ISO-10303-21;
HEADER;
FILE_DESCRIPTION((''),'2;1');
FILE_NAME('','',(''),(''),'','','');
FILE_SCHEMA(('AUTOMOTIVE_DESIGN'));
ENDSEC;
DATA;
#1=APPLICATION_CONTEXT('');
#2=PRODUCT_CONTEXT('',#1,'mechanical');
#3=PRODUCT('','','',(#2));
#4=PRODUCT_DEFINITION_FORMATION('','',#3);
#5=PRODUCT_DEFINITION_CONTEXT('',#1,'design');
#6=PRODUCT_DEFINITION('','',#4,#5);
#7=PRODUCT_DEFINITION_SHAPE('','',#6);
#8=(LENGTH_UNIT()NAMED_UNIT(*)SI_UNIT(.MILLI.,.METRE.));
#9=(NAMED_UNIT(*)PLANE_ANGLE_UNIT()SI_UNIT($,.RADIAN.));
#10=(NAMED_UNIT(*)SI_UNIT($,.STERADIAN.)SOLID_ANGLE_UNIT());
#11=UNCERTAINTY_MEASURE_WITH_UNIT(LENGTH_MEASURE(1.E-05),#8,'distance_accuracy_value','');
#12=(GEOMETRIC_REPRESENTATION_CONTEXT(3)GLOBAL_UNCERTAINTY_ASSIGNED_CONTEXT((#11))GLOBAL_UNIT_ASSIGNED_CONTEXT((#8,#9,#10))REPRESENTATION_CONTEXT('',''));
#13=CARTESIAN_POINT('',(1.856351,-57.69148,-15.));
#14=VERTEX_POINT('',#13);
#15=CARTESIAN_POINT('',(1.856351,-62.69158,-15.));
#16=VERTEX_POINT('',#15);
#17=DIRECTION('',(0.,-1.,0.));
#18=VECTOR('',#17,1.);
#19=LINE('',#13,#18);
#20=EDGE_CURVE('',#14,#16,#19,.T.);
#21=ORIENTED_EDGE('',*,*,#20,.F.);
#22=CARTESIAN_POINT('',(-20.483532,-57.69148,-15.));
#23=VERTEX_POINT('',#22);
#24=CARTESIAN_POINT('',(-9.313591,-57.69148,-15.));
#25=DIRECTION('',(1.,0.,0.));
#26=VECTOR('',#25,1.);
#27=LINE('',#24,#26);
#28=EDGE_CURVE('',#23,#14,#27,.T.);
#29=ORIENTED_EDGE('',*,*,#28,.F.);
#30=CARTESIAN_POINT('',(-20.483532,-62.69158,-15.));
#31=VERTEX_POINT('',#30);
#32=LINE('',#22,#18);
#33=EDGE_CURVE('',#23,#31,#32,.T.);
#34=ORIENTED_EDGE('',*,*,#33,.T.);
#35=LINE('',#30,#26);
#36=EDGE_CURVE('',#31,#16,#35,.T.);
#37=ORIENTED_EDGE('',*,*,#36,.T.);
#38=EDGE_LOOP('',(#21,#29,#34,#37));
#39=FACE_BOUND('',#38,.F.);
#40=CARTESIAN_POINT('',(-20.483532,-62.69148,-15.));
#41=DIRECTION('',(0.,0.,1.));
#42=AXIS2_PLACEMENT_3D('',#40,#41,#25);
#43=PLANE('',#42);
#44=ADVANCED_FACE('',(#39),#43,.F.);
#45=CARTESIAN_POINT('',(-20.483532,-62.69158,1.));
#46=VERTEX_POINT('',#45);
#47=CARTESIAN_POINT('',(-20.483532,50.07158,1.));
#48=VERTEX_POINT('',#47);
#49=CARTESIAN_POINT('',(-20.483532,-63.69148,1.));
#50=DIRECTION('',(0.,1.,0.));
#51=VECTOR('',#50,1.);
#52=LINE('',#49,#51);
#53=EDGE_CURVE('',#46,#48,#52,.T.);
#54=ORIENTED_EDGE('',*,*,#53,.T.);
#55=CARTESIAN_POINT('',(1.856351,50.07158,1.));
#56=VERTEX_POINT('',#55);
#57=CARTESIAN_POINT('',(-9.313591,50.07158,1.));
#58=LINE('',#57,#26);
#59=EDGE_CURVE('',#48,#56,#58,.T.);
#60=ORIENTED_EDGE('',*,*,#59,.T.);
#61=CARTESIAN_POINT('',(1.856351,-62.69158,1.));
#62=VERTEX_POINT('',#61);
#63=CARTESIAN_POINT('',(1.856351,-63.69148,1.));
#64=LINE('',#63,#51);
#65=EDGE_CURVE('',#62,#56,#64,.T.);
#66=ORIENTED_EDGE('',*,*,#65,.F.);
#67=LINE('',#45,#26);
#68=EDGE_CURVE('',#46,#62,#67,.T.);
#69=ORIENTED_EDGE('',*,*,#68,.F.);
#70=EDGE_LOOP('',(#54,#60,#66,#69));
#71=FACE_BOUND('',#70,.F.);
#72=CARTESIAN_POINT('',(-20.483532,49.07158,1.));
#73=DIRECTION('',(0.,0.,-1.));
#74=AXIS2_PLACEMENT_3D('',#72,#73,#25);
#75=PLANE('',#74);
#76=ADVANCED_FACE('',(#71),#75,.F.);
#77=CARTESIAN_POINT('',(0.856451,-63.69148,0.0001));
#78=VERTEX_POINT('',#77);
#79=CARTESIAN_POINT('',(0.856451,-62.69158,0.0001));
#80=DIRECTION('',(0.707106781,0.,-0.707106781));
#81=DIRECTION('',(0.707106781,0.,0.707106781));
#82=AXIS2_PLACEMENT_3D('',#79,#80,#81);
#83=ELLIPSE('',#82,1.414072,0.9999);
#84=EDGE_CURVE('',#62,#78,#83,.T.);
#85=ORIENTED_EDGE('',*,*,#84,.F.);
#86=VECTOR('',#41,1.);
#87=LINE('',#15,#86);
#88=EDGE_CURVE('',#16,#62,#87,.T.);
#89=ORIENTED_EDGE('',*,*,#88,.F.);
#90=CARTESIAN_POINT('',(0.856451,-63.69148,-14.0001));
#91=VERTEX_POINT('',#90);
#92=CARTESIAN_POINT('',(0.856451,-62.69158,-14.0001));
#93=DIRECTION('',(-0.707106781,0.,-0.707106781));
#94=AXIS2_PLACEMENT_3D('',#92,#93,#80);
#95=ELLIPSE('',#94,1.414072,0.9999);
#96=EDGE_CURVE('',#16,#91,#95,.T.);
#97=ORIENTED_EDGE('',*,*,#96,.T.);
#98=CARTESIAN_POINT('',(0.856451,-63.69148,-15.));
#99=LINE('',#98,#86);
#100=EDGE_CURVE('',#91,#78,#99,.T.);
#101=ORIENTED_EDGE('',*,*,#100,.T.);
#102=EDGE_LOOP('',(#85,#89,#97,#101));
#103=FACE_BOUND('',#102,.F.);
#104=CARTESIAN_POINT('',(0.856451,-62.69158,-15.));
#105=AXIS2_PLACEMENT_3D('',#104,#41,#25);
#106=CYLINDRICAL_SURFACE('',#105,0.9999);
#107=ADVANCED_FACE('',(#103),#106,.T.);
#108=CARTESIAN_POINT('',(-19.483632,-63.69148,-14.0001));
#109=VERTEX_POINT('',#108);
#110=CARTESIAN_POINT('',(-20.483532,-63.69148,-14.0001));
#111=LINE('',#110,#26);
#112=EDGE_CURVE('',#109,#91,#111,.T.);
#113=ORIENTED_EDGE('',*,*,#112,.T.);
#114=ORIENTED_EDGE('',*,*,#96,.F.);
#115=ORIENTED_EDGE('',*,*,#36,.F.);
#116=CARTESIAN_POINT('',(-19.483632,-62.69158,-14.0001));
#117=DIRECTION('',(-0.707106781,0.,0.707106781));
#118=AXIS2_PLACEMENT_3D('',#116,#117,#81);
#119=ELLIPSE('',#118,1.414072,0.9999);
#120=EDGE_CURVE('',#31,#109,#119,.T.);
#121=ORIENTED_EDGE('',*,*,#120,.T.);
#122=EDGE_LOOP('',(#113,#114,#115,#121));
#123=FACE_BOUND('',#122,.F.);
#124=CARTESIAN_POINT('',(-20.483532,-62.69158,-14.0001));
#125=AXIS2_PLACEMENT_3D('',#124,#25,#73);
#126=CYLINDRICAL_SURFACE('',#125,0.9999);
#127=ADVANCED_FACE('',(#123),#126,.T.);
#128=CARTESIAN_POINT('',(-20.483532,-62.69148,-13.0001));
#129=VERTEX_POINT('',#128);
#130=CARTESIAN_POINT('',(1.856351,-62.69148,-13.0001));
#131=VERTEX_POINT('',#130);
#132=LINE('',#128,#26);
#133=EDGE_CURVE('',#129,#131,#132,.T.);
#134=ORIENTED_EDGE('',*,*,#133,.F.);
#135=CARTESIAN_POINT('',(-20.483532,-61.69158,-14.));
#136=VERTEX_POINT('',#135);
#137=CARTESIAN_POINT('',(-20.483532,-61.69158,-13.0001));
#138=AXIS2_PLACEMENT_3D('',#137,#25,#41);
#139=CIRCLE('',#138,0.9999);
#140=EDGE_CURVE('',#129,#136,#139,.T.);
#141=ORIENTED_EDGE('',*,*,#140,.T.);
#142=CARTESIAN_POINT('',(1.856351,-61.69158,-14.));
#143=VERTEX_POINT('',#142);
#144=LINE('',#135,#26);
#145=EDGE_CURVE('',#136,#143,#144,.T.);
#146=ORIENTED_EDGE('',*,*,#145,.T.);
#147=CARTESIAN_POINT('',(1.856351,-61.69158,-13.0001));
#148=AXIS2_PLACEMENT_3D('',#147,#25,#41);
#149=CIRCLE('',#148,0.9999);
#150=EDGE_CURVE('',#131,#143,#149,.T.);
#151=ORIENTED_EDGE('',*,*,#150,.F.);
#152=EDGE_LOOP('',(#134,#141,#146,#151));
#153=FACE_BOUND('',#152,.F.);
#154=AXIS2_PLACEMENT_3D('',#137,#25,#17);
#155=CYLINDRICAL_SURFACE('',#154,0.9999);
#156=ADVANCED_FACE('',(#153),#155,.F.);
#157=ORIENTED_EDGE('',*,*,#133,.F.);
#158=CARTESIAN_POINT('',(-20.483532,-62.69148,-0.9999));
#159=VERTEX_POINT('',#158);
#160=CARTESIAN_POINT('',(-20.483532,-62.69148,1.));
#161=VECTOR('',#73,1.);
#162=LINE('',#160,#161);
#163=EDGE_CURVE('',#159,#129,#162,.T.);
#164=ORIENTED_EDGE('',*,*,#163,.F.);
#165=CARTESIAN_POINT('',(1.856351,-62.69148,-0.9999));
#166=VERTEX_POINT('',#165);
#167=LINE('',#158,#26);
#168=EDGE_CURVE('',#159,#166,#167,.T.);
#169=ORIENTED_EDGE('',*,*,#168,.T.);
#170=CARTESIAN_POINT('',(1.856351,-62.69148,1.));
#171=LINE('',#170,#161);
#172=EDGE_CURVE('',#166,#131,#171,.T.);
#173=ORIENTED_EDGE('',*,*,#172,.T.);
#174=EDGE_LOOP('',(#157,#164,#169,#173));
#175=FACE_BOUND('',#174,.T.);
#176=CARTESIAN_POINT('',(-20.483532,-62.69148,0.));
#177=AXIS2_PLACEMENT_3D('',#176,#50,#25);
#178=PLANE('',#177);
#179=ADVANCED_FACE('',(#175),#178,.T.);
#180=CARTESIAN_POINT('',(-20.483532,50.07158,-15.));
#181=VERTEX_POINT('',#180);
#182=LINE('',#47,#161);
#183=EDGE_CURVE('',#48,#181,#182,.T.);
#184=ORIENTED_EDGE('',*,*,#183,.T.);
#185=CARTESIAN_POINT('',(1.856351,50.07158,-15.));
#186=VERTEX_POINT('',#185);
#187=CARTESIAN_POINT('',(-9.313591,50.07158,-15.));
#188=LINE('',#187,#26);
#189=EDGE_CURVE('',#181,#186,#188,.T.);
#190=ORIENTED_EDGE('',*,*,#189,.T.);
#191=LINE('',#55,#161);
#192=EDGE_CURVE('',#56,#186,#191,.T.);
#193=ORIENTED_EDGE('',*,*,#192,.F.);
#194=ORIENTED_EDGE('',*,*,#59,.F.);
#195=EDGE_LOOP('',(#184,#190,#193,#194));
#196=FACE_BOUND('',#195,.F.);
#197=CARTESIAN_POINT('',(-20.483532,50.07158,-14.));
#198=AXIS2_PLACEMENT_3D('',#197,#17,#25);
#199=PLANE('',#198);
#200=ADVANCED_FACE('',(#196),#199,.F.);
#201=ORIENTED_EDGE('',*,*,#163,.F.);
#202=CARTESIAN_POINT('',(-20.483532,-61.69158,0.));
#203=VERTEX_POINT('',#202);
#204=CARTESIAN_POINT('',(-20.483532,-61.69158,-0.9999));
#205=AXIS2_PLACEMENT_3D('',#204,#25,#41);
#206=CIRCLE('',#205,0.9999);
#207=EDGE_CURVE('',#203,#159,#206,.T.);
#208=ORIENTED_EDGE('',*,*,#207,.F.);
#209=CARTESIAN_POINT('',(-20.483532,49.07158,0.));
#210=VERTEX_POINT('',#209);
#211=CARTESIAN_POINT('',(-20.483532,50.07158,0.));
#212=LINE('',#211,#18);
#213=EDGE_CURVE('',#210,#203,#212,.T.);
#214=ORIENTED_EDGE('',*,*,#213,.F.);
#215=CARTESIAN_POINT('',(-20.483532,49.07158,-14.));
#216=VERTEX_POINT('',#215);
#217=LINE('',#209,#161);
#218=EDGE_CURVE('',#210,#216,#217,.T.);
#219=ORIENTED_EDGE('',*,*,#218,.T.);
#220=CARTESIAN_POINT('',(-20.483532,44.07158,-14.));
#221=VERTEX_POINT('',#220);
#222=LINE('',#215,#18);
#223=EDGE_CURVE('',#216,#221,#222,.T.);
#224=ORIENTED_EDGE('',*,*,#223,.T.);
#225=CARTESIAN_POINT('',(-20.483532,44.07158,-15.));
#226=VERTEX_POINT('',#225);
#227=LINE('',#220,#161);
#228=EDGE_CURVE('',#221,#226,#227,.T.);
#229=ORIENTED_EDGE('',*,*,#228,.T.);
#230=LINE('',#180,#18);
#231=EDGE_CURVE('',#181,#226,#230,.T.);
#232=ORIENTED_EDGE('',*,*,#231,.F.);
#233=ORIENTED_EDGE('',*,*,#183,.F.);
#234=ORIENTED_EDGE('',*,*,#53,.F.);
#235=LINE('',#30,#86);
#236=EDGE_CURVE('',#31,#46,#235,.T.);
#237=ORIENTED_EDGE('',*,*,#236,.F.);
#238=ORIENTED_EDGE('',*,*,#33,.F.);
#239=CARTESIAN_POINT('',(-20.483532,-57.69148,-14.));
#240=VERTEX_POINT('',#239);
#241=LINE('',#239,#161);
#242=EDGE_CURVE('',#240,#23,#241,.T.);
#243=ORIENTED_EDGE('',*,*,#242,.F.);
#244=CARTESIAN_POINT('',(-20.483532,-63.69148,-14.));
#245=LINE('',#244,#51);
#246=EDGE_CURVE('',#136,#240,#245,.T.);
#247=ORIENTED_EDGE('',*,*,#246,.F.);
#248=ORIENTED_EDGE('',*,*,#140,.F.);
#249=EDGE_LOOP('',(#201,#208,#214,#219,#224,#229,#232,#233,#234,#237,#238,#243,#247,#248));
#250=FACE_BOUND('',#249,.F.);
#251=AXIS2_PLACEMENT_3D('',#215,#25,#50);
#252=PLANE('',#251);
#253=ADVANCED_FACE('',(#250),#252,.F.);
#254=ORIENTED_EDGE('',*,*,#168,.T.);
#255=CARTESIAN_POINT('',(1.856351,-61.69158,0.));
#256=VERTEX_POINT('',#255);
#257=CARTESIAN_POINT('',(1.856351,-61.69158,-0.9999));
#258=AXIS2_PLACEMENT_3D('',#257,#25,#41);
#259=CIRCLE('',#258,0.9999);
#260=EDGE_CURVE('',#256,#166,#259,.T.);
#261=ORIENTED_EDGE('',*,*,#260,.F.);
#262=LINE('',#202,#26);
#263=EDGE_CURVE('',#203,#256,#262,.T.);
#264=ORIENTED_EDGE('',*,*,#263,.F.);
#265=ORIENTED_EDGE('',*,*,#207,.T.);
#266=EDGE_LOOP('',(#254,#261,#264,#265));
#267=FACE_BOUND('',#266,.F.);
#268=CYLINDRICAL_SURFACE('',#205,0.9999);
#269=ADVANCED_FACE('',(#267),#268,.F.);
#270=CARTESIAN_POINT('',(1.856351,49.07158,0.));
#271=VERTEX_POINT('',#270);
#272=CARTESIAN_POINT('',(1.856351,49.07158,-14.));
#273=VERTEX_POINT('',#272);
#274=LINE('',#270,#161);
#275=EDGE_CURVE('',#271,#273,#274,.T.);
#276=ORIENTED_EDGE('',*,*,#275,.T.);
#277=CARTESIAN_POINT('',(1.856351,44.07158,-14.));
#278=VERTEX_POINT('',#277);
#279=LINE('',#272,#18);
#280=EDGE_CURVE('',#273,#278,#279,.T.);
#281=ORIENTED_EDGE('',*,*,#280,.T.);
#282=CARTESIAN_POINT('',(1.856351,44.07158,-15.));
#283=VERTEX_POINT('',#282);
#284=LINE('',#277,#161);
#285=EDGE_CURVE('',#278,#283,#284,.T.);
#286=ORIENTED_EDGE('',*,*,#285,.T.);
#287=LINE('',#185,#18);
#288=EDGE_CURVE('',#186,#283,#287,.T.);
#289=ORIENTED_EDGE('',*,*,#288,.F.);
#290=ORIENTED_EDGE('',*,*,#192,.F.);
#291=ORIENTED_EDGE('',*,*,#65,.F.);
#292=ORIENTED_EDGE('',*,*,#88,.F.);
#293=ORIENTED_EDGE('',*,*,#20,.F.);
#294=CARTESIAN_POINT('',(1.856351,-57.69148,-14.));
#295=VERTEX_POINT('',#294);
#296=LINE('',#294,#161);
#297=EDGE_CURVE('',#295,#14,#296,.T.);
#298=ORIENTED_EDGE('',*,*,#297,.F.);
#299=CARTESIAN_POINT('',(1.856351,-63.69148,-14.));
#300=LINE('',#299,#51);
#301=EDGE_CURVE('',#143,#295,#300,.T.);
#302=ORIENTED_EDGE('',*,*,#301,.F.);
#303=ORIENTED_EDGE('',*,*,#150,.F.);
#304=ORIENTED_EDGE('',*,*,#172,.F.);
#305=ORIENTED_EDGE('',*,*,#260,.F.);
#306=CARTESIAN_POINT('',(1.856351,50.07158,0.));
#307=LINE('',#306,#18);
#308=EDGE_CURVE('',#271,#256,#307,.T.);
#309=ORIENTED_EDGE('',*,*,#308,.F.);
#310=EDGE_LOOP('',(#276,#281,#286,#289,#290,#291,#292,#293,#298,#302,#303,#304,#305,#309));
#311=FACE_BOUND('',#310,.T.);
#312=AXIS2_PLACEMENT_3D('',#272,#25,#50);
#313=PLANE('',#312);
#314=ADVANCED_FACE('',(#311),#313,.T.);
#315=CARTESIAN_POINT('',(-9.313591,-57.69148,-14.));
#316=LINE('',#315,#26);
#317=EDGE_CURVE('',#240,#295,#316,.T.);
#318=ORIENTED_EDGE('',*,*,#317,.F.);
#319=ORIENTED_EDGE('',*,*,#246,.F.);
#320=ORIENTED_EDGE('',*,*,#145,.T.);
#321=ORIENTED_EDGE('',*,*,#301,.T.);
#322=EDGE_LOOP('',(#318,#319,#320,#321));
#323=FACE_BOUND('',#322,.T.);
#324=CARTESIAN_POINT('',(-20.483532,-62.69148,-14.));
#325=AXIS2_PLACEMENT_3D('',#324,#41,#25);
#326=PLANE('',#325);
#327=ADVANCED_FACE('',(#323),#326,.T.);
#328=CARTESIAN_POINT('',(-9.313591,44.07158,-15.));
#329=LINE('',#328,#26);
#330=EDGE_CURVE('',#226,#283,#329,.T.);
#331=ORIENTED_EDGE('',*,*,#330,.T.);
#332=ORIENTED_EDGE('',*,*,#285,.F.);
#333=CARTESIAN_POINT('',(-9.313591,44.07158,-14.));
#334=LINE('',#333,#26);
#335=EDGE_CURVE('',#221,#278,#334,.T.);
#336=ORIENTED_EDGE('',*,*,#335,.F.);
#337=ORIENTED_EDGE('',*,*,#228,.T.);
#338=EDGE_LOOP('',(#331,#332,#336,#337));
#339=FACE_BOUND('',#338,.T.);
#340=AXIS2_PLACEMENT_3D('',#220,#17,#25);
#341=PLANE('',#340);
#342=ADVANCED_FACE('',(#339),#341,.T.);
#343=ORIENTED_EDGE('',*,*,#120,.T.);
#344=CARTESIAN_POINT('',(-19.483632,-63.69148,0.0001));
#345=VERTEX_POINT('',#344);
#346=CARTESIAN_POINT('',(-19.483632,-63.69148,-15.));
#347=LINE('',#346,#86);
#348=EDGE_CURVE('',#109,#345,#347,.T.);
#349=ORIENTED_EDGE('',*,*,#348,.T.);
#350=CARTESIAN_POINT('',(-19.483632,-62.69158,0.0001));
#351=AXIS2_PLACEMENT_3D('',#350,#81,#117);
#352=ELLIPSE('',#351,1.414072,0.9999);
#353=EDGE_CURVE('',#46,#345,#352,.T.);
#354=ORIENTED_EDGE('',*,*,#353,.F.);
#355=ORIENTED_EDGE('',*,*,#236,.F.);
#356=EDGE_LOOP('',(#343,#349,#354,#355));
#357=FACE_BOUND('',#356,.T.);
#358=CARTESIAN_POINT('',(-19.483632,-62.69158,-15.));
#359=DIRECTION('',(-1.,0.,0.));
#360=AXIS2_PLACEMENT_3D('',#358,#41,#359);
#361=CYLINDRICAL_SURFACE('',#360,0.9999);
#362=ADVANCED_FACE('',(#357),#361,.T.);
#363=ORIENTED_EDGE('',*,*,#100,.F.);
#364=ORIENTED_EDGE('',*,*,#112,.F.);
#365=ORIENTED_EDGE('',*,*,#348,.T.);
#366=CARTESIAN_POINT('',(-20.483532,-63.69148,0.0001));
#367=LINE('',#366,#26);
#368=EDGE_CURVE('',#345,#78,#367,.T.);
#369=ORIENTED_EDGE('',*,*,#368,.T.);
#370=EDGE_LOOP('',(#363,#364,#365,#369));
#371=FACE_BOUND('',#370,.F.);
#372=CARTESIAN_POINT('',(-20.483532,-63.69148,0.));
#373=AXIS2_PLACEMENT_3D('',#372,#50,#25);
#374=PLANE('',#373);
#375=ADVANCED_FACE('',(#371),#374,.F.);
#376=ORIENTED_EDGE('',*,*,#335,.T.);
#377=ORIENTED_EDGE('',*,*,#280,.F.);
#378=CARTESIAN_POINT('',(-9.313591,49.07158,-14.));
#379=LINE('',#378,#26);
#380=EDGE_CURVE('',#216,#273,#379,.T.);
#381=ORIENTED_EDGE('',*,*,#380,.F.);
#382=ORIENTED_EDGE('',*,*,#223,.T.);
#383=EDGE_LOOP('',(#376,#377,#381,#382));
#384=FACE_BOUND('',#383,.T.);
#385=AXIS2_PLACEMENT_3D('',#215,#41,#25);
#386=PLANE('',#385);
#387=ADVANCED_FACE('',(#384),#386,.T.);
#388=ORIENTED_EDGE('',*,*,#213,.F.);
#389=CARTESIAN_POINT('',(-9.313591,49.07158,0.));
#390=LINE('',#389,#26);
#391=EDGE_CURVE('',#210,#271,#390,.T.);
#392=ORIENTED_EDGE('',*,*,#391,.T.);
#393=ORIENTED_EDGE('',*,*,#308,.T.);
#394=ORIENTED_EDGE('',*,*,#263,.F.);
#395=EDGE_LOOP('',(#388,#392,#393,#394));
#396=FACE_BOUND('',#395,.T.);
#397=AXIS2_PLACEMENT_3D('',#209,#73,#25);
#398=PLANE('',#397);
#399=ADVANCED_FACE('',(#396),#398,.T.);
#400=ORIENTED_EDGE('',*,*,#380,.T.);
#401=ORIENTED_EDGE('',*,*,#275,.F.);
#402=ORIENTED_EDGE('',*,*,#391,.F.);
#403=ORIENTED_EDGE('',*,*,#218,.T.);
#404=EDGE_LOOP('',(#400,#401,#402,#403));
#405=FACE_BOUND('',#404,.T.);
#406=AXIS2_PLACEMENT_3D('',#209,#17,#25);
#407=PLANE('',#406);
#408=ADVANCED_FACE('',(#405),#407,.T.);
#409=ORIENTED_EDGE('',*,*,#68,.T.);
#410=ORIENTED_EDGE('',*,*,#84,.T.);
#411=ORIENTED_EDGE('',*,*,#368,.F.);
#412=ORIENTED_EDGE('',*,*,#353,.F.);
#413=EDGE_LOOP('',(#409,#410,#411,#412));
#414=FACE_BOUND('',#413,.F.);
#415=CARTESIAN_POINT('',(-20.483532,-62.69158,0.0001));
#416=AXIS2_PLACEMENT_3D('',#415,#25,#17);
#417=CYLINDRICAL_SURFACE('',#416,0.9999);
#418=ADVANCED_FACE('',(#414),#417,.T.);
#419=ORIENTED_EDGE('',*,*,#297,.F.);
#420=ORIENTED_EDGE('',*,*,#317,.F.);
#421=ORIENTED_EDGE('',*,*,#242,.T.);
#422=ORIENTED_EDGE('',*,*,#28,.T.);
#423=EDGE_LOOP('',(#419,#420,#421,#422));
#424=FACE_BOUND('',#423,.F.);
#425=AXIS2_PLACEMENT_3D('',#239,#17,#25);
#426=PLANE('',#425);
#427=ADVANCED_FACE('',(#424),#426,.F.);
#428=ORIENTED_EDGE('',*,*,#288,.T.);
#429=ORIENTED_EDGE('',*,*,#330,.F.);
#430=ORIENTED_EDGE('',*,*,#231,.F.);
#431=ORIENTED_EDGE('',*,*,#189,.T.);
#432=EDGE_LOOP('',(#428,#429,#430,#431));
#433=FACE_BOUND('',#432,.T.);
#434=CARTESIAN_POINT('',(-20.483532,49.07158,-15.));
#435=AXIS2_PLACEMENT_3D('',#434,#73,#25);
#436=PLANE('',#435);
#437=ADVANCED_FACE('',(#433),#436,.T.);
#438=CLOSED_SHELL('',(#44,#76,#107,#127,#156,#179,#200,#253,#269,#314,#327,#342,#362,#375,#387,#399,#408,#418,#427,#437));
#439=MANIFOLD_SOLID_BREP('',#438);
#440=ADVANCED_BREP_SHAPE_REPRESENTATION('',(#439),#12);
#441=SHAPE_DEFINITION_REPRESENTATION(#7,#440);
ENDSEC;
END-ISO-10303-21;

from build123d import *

# Parameters (mm, degrees)
F0_W     = 22.3398831487
F0_H     = 111.7630600929
F1_DEPTH = 1
F2_DEPTH = 1
F3_DEPTH = 1
F4_DEPTH = 14
F5_DEPTH = 14
F6_DEPTH = 1
F7_DEPTH = 1
F8_DEPTH = 5
F9_DEPTH = 5
F11_R    = 0.9999


# Not quite as in the source:
# - a fillet or chamfer is up to 0.001 mm smaller than in the source, because OpenCascade refuses the exact size


with BuildPart() as f1:
    # F0 (on Top) → F1 (new body)
    with BuildSketch(Plane.XY):
        with Locations((-9.3135908246, -6.8099498749)):
            Rectangle(F0_W, F0_H)
    extrude(amount=F1_DEPTH)


with BuildPart() as f2:
    # F2 (new): a face of the model
    f2_faces = [f1.part.faces().sort_by_distance(p)[0] for p in [
        (-9.3135908246, -62.6914799213, 0.5),
    ]]
    extrude(f2_faces, amount=F2_DEPTH)


with BuildPart() as f3:
    # F3 (new): a face of the model
    f3_faces = [f1.part.faces().sort_by_distance(p)[0] for p in [
        (-9.3135908246, 49.0715801716, 0.5),
    ]]
    extrude(f3_faces, amount=F3_DEPTH)


with BuildPart() as f4:
    # F4 (new): a face of the model
    f4_faces = [f3.part.faces().sort_by_distance(p)[0] for p in [
        (-9.3135908246, 49.5715801716, 0),
    ]]
    extrude(f4_faces, amount=F4_DEPTH)


with BuildPart() as f5:
    # F5 (new): a face of the model
    f5_faces = [f2.part.faces().sort_by_distance(p)[0] for p in [
        (-9.3135908246, -63.1914799213, 0),
    ]]
    extrude(f5_faces, amount=F5_DEPTH)


with BuildPart() as f6:
    # F6 (new): a face of the model
    f6_faces = [f5.part.faces().sort_by_distance(p)[0] for p in [
        (-9.3135908246, -63.1914799213, -14),
    ]]
    extrude(f6_faces, amount=F6_DEPTH)


with BuildPart() as f7:
    # F7 (new): a face of the model
    f7_faces = [f4.part.faces().sort_by_distance(p)[0] for p in [
        (-9.3135908246, 49.5715801716, -14),
    ]]
    extrude(f7_faces, amount=F7_DEPTH)


with BuildPart() as f8:
    # F8 (new): a face of the model
    f8_faces = [f6.part.faces().sort_by_distance(p)[0] for p in [
        (-9.3135908246, -62.6914799213, -14.5),
    ]]
    extrude(f8_faces, amount=F8_DEPTH)


with BuildPart() as f9:
    # F9 (new): a face of the model
    f9_faces = [f7.part.faces().sort_by_distance(p)[0] for p in [
        (-9.3135908246, 49.0715801716, -14.5),
    ]]
    extrude(f9_faces, amount=F9_DEPTH)


with BuildPart() as f8_1:
    add(f8.part)

    # F10: union F6, F5, F2, F1, F3, F4, F9, F7
    add(f6.part)
    add(f5.part)
    add(f2.part)
    add(f1.part)
    add(f3.part)
    add(f4.part)
    add(f9.part)
    add(f7.part)

    # F11 (radius 1 in the source; OpenCascade refuses exactly that, so slightly less here)
    f11_edges = [f8_1.edges().sort_by_distance(p)[0] for p in [
        (-9.313591, -62.69148, 0),
        (-20.483532, -63.69148, -7),
        (-9.313591, -63.69148, -15),
        (1.856351, -63.69148, -7),
        (-9.313591, -63.69148, 1),
        (-9.313591, -62.69148, -14),
    ]]
    fillet(f11_edges, radius=F11_R)


solid = f8_1.part
